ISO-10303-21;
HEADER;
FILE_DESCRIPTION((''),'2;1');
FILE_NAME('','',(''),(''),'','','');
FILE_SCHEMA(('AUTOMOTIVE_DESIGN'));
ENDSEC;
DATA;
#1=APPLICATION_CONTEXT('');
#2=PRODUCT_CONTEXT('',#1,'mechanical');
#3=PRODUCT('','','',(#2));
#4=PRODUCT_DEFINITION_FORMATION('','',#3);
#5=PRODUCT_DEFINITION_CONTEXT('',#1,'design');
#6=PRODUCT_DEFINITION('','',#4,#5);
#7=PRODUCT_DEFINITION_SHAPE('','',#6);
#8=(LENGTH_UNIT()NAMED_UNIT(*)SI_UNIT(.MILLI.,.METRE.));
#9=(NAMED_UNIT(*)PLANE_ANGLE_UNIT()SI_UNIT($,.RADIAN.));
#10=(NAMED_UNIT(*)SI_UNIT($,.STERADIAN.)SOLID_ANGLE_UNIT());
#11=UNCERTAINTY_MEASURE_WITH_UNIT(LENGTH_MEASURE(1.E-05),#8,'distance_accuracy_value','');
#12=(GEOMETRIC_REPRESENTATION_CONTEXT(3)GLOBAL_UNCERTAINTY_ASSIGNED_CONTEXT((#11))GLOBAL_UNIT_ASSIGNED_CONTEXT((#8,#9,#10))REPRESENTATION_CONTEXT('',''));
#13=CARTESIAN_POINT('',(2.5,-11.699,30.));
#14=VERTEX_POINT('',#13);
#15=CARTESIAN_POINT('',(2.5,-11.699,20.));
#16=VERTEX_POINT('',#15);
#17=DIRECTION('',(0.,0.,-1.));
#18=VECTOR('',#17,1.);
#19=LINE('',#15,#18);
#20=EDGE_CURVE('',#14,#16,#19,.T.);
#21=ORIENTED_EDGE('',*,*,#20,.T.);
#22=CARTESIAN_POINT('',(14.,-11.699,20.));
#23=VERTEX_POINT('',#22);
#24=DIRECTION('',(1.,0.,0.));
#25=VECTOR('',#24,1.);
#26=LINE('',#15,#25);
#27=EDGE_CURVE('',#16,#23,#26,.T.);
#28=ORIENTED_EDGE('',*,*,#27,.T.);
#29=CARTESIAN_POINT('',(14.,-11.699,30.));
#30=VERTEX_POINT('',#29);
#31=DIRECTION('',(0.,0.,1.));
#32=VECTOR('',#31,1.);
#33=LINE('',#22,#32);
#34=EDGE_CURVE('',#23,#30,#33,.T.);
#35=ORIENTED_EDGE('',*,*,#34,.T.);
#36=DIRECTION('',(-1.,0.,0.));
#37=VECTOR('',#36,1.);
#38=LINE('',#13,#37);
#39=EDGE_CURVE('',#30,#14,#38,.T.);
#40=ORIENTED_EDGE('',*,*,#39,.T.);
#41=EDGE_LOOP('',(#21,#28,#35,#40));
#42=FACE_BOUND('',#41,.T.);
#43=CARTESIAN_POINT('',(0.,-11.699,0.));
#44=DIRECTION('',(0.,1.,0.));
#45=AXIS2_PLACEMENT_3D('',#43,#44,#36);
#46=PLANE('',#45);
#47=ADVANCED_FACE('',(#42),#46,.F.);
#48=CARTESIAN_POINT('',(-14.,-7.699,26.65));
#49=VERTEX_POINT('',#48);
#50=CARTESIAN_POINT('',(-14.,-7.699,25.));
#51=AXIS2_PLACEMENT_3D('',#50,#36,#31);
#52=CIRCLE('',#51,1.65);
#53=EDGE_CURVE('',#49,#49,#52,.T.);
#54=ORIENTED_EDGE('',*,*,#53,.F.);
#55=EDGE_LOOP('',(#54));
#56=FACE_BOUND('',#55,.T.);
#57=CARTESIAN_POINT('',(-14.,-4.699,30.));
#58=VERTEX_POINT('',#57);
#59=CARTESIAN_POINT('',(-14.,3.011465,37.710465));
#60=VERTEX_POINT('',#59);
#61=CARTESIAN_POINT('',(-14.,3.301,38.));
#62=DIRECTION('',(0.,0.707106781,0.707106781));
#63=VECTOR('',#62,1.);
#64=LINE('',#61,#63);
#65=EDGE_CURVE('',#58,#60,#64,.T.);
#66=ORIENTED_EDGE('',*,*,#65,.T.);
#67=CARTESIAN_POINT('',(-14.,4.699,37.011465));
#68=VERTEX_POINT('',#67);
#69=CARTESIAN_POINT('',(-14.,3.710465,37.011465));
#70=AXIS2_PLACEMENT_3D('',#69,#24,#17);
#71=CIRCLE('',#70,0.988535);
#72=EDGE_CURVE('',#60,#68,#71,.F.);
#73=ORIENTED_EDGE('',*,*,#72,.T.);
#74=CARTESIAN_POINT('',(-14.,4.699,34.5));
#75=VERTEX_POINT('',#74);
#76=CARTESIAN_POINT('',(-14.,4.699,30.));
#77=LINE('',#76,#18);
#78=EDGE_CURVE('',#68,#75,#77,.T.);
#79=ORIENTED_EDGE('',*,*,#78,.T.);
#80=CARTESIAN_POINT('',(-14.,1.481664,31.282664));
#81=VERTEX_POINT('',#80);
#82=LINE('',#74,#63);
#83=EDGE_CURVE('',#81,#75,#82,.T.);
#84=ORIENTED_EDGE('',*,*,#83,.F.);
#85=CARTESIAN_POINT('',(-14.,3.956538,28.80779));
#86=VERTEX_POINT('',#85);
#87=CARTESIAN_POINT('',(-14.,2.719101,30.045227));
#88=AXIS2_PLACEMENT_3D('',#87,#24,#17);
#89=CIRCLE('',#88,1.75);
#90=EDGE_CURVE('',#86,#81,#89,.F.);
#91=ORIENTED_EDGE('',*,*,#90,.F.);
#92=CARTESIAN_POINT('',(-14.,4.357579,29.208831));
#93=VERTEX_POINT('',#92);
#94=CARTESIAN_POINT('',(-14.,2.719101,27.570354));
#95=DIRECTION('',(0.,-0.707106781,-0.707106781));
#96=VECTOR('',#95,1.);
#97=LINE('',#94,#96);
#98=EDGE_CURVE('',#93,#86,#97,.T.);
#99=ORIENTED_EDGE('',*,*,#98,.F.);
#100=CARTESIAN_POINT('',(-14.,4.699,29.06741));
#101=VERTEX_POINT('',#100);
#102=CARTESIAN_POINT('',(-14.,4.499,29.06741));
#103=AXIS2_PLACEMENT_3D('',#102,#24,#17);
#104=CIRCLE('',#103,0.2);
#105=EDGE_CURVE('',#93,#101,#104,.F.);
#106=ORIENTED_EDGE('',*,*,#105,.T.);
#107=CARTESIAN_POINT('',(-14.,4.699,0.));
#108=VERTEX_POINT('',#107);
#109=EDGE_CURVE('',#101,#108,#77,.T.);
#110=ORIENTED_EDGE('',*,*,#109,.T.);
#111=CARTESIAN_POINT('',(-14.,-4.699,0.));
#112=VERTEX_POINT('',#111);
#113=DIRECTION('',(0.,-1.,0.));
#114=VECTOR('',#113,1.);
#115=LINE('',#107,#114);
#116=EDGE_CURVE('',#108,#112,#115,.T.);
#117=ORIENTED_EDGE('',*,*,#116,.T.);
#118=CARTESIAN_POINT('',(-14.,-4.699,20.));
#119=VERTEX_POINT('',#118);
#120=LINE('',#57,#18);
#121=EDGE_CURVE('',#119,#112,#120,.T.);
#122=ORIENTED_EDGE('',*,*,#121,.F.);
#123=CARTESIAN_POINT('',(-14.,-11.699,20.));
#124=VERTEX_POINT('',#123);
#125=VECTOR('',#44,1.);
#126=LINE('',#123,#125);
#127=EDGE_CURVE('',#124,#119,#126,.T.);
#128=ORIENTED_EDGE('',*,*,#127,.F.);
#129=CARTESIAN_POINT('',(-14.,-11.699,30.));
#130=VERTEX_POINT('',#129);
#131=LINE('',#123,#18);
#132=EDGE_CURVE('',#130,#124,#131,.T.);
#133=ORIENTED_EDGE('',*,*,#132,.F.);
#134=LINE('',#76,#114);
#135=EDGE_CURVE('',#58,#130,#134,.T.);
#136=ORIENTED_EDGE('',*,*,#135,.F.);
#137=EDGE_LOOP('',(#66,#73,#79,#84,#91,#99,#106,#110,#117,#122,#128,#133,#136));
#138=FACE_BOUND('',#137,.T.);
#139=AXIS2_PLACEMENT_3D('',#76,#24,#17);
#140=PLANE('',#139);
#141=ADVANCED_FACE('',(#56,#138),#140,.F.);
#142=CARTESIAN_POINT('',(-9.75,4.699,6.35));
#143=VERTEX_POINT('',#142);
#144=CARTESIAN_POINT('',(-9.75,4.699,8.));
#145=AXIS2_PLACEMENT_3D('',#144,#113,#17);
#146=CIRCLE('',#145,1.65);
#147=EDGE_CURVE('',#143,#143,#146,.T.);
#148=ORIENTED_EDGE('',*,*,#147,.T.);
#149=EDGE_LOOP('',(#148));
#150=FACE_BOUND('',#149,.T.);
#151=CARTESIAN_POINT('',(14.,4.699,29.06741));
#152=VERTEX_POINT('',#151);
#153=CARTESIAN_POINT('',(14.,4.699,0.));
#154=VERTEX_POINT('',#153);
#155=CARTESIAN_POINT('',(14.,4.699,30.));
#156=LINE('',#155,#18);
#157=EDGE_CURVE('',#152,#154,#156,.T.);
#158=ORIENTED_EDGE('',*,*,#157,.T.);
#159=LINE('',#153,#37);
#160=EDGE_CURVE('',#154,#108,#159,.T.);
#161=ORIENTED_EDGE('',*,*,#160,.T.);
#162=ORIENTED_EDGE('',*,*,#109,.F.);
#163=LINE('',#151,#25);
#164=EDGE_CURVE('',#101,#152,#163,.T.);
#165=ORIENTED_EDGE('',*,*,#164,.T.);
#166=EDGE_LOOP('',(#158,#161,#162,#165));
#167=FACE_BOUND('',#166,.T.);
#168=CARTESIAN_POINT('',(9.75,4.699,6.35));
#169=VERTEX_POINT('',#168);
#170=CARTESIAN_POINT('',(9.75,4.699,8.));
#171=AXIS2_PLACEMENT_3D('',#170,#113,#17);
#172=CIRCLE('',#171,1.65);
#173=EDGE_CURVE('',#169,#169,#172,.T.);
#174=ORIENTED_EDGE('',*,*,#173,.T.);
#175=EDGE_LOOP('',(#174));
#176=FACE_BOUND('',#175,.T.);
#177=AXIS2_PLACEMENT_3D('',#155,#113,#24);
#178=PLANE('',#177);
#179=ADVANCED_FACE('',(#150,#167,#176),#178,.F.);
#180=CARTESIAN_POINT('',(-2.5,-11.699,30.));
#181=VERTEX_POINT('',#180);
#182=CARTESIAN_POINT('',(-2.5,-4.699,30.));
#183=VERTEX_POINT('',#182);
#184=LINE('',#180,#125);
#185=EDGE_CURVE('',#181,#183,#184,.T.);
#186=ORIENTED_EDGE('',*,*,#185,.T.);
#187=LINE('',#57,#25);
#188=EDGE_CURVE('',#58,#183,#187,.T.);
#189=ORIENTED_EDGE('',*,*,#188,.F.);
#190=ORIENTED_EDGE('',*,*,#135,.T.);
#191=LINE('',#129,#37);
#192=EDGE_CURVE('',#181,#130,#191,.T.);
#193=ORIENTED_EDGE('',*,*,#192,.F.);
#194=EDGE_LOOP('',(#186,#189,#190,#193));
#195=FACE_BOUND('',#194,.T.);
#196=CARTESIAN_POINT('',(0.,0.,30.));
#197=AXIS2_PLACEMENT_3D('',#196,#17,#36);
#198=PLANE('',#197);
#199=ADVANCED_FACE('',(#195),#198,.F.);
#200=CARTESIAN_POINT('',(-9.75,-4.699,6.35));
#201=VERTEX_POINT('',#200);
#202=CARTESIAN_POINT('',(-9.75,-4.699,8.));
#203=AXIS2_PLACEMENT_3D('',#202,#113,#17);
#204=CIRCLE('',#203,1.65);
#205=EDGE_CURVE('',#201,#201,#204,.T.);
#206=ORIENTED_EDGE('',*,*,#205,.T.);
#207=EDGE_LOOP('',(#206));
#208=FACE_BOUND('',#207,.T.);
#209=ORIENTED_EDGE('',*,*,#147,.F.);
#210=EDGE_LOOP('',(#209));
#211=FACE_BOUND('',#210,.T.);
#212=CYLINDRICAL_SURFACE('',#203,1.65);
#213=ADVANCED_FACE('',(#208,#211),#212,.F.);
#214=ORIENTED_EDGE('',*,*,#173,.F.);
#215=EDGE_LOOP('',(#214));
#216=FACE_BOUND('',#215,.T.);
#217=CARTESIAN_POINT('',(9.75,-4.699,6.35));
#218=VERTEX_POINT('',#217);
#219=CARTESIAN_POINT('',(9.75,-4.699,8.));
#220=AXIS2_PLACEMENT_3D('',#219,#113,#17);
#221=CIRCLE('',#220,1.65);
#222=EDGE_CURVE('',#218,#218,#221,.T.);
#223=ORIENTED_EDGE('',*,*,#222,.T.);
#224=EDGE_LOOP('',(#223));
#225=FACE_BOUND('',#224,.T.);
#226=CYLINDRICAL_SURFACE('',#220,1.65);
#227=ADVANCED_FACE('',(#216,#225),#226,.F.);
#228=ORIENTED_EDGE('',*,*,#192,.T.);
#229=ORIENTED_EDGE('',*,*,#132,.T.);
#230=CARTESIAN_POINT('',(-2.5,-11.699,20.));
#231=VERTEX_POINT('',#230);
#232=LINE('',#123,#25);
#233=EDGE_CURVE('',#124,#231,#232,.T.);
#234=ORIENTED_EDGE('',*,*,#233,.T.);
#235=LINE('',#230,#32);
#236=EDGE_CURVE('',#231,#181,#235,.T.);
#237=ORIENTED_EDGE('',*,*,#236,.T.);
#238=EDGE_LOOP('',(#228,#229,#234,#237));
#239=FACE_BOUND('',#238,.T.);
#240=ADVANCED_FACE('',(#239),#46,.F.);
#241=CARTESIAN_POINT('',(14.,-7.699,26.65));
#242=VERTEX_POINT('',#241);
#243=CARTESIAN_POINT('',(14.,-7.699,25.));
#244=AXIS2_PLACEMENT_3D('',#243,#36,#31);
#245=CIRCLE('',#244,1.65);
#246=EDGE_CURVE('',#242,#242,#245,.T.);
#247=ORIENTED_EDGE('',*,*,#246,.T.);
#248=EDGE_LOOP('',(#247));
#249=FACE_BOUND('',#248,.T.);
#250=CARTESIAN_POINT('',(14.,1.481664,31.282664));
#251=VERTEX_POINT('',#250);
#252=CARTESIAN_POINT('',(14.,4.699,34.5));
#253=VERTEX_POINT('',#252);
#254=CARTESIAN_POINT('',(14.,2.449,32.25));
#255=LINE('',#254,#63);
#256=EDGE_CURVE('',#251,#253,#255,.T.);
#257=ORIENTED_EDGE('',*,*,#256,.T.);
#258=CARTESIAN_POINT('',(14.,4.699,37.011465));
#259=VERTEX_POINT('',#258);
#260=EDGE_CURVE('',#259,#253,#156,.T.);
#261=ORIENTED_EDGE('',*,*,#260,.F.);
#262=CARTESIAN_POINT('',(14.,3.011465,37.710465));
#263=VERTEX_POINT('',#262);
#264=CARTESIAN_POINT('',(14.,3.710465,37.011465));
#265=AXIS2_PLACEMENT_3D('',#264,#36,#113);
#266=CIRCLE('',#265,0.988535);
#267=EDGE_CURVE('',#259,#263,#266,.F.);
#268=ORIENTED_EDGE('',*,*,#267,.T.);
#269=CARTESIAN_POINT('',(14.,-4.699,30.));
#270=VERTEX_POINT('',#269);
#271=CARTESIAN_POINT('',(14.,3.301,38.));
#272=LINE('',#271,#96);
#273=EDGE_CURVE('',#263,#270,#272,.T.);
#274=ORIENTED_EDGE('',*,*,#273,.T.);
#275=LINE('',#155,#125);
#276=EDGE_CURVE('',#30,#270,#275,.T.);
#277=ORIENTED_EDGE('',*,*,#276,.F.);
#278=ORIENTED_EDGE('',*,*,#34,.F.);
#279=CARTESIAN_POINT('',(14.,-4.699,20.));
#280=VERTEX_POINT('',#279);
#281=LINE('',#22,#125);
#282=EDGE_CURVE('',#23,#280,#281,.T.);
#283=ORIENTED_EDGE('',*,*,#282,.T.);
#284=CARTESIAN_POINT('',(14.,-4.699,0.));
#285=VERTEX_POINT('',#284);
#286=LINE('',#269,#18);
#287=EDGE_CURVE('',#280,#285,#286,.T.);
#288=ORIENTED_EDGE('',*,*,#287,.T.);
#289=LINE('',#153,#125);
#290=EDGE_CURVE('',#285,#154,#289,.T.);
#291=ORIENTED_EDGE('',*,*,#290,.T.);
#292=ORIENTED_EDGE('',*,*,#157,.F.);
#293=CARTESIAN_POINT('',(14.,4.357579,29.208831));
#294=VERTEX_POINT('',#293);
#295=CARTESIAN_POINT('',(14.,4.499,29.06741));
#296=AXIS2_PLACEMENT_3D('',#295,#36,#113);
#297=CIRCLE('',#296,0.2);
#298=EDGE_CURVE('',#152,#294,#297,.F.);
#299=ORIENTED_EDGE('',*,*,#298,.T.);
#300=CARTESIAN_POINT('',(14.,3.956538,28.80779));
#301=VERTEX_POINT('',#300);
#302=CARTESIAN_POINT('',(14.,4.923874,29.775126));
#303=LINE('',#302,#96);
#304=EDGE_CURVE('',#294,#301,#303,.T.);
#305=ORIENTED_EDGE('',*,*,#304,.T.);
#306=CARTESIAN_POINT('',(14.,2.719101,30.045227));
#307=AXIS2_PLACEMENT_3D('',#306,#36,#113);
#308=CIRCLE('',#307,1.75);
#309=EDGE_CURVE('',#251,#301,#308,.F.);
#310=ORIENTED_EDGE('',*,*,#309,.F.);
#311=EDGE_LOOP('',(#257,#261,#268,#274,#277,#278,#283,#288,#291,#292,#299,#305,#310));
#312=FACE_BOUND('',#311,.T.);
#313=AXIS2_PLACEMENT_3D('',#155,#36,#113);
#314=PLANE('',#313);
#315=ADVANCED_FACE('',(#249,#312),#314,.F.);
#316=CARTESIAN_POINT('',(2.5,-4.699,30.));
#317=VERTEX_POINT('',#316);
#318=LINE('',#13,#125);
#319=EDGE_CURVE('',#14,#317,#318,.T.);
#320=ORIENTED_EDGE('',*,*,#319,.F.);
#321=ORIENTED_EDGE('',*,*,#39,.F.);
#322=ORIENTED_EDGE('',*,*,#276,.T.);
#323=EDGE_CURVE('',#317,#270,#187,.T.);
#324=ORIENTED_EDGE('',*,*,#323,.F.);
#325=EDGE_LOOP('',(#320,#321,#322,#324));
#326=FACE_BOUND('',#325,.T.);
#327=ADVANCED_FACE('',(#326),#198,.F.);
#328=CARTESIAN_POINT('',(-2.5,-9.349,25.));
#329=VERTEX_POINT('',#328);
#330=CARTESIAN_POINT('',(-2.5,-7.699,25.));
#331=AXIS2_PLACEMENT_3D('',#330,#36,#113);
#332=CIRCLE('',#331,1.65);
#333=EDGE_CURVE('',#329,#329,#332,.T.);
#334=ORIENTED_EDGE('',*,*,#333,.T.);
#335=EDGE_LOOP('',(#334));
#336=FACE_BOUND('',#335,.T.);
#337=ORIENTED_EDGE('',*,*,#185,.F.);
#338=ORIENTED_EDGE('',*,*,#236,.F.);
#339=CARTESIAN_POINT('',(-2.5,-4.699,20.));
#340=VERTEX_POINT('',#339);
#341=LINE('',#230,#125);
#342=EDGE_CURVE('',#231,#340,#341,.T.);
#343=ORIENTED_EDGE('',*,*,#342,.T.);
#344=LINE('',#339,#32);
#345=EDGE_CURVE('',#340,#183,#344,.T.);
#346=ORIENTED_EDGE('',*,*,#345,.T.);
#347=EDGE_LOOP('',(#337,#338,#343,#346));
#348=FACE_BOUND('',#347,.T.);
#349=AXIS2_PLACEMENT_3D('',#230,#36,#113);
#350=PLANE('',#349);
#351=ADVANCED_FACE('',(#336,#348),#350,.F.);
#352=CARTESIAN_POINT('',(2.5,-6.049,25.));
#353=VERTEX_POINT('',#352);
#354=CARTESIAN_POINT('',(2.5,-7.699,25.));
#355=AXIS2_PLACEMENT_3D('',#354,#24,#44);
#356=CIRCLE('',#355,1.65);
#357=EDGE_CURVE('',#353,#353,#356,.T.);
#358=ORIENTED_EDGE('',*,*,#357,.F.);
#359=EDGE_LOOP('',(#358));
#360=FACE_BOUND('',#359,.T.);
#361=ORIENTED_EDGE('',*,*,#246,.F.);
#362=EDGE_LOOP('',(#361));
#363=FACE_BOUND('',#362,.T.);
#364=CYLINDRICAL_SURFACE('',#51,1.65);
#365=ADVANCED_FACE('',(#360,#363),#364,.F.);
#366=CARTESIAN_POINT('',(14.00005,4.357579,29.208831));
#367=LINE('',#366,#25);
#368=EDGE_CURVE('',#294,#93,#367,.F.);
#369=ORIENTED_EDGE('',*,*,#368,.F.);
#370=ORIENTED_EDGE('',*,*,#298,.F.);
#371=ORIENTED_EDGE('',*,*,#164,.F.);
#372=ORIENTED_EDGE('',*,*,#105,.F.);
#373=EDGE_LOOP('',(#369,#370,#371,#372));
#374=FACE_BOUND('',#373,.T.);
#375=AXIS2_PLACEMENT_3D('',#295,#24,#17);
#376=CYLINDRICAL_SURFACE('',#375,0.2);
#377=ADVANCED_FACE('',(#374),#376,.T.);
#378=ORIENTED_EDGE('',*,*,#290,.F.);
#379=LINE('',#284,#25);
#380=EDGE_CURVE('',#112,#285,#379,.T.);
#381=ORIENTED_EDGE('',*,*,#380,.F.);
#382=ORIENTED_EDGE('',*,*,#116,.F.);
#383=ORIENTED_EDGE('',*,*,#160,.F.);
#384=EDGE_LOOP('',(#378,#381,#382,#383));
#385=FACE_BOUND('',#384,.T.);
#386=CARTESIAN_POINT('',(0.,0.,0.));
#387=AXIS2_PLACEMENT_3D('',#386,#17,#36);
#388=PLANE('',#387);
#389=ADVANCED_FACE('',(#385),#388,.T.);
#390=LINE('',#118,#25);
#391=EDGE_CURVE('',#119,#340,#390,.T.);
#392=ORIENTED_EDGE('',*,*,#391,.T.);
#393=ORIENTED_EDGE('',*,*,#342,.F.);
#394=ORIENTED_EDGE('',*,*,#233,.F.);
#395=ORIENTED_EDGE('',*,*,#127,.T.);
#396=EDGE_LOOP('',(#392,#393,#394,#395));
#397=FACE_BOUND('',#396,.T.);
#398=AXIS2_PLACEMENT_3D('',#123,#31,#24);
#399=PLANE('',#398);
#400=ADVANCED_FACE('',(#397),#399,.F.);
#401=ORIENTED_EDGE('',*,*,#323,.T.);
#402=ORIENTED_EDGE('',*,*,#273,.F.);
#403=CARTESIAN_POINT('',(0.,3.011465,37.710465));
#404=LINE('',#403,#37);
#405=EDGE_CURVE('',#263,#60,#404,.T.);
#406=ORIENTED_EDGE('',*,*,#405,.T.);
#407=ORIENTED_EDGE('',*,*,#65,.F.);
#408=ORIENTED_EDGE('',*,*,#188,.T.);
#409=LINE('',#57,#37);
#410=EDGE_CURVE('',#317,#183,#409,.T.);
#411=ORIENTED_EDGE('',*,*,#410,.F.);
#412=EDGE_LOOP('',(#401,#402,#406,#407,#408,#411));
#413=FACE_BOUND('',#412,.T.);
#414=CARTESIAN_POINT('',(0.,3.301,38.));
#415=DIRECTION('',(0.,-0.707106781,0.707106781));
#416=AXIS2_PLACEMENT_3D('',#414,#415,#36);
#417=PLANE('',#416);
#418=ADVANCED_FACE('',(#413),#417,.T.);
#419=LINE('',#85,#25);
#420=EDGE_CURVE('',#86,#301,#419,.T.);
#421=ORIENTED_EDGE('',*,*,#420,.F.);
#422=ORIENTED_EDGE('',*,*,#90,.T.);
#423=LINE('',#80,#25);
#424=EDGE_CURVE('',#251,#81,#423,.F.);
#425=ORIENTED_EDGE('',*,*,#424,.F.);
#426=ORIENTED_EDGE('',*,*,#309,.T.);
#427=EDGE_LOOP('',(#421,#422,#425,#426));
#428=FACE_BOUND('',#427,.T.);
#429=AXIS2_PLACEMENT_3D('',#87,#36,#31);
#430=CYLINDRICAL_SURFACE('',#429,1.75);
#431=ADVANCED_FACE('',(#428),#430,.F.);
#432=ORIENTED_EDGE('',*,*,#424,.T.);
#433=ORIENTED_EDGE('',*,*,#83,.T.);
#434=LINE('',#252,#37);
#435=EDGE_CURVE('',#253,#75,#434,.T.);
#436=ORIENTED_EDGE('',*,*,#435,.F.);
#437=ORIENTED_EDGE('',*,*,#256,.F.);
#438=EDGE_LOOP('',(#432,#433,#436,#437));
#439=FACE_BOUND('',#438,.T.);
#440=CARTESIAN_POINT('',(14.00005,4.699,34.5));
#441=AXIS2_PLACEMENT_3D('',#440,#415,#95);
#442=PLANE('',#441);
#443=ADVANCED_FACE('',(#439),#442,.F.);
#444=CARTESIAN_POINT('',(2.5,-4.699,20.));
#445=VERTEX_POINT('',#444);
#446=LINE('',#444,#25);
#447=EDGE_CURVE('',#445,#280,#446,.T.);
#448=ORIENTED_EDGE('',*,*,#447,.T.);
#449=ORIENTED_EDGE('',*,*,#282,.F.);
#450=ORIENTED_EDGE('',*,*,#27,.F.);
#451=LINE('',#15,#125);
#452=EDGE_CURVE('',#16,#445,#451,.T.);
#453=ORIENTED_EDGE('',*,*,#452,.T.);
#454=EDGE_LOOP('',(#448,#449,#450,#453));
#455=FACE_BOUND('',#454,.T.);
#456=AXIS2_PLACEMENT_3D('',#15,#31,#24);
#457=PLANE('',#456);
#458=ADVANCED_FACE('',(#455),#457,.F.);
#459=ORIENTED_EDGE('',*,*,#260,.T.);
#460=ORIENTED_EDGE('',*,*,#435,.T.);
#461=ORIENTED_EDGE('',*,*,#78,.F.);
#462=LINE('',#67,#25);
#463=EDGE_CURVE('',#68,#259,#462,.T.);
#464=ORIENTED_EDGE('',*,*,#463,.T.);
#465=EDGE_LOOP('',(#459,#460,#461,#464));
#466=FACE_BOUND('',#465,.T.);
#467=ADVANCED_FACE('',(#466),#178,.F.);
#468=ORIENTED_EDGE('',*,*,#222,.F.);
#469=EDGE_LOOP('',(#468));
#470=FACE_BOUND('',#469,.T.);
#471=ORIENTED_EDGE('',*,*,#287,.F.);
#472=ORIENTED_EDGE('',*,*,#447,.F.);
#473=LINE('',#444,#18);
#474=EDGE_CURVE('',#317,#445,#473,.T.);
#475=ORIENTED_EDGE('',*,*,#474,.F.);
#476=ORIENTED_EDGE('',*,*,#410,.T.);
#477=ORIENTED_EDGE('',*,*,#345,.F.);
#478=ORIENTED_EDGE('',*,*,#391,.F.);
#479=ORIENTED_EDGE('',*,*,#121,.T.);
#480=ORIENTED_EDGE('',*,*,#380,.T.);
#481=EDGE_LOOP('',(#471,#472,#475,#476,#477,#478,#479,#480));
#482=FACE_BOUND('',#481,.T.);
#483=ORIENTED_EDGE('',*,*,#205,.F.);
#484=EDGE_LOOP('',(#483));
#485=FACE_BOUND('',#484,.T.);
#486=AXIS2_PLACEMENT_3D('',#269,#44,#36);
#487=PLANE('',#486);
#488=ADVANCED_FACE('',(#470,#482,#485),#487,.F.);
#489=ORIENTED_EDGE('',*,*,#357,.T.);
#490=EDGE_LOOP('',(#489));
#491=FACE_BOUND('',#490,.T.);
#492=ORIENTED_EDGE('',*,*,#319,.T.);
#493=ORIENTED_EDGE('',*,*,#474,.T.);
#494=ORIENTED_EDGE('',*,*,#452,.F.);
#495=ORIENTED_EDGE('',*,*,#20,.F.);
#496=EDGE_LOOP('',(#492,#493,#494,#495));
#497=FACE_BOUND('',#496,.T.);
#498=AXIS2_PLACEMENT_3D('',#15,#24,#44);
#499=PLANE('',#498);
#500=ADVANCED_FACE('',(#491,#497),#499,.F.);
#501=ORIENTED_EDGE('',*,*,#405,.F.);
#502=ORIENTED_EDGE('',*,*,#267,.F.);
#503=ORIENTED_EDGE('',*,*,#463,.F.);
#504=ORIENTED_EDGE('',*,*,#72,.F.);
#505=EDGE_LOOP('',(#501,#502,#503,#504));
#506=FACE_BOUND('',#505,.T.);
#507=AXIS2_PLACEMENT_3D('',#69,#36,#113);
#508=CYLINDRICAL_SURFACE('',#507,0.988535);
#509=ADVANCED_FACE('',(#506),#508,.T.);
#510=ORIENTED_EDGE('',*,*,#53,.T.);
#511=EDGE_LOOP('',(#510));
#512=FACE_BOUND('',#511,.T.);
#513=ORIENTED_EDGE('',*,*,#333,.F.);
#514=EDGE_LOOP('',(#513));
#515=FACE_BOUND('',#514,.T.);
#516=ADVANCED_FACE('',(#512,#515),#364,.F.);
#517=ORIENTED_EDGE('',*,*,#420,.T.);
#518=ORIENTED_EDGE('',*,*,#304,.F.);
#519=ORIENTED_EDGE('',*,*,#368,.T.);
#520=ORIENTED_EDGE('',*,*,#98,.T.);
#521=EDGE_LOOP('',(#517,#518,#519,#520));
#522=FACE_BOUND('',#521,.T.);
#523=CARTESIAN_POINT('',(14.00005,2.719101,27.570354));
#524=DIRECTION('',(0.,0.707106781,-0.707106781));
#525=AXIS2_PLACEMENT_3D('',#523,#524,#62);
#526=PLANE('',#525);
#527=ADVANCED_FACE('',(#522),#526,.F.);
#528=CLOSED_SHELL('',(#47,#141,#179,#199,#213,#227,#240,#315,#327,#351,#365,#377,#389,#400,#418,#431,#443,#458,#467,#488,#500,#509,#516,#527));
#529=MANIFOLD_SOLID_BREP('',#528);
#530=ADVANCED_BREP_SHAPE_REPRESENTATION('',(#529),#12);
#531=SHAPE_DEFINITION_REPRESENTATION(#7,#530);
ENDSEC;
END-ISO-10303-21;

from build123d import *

# Parameters (mm, degrees)
SKETCH2_W             = 28
SKETCH2_H             = 9.398
BOSS_EXTRUDE1_DEPTH   = 30
M4X0_7_TAPPED_HOLE1_D = 3.3
SKETCH8_W             = 11.5
SKETCH8_H             = 10
BOSS_EXTRUDE2_DEPTH   = 7
M4X0_7_TAPPED_HOLE2_D = 3.3
SKETCH16_W            = 28
SKETCH16_H            = 9.398
BOSS_EXTRUDE3_DEPTH   = 8
CUT_EXTRUDE7_DEPTH    = 49.629894108
FILLET2_R             = 1.75
FILLET3_R             = 0.2
CHAMFER1_SIZE         = 8
FILLET4_R             = 0.988535


with BuildPart() as part:
    # Sketch2 → Boss-Extrude1 (new body)
    with BuildSketch(Plane.XY):
        Rectangle(SKETCH2_W, SKETCH2_H)
    extrude(amount=BOSS_EXTRUDE1_DEPTH)

    # M4x0.7 Tapped Hole1 (through all)
    with Locations(Plane(origin=(0, -4.699, 0), x_dir=(-1, 0, 0), z_dir=(0, -1, 0))):
        with Locations((-9.75, -8), (9.75, -8)):
            Hole(M4X0_7_TAPPED_HOLE1_D / 2)

    # Sketch8 → Boss-Extrude2 (add)
    with BuildSketch(Plane.XZ.offset(4.699)):
        with Locations((-8.25, 25)):
            Rectangle(SKETCH8_W, SKETCH8_H)
        with Locations((8.25, 25)):
            Rectangle(SKETCH8_W, SKETCH8_H)
    extrude(amount=BOSS_EXTRUDE2_DEPTH)

    # M4x0.7 Tapped Hole2 (through all)
    with Locations(Plane.ZY.offset(14)):
        with Locations((25, -7.699)):
            Hole(M4X0_7_TAPPED_HOLE2_D / 2)

    # Sketch16 → Boss-Extrude3 (add)
    with BuildSketch(Plane.XY.offset(30)):
        Rectangle(SKETCH16_W, SKETCH16_H)
    extrude(amount=BOSS_EXTRUDE3_DEPTH)

    # Sketch15 → Cut-Extrude7 (cut, through all)
    with BuildSketch(Plane.ZY.offset(14)):
        Polygon((34.5, 4.699), (30.045227279, 0.244227279), (27.570353544, 2.719101013), (29.550252532, 4.699), align=None)
    extrude(amount=-CUT_EXTRUDE7_DEPTH, mode=Mode.SUBTRACT)

    # Fillet2
    fillet2_edges = [part.edges().sort_by_distance(p)[0] for p in [
        (0, 0.244227279, 30.045227279),
        (0, 2.719101013, 27.570353544),
    ]]
    fillet(fillet2_edges, radius=FILLET2_R - 0.0001)  # a hair under: the kernel refuses the full size

    # Fillet3
    fillet3_edges = [part.edges().sort_by_distance(p)[0] for p in [
        (0, 4.699, 29.550252532),
    ]]
    fillet(fillet3_edges, radius=FILLET3_R)

    # Chamfer1
    chamfer1_edges = [part.edges().sort_by_distance(p)[0] for p in [
        (0, -4.699, 38),
    ]]
    chamfer(chamfer1_edges, length=CHAMFER1_SIZE)

    # Fillet4
    fillet4_edges = [part.edges().sort_by_distance(p)[0] for p in [
        (0, 3.301, 38),
        (0, 4.699, 38),
    ]]
    fillet(fillet4_edges, radius=FILLET4_R)


solid = part.part
